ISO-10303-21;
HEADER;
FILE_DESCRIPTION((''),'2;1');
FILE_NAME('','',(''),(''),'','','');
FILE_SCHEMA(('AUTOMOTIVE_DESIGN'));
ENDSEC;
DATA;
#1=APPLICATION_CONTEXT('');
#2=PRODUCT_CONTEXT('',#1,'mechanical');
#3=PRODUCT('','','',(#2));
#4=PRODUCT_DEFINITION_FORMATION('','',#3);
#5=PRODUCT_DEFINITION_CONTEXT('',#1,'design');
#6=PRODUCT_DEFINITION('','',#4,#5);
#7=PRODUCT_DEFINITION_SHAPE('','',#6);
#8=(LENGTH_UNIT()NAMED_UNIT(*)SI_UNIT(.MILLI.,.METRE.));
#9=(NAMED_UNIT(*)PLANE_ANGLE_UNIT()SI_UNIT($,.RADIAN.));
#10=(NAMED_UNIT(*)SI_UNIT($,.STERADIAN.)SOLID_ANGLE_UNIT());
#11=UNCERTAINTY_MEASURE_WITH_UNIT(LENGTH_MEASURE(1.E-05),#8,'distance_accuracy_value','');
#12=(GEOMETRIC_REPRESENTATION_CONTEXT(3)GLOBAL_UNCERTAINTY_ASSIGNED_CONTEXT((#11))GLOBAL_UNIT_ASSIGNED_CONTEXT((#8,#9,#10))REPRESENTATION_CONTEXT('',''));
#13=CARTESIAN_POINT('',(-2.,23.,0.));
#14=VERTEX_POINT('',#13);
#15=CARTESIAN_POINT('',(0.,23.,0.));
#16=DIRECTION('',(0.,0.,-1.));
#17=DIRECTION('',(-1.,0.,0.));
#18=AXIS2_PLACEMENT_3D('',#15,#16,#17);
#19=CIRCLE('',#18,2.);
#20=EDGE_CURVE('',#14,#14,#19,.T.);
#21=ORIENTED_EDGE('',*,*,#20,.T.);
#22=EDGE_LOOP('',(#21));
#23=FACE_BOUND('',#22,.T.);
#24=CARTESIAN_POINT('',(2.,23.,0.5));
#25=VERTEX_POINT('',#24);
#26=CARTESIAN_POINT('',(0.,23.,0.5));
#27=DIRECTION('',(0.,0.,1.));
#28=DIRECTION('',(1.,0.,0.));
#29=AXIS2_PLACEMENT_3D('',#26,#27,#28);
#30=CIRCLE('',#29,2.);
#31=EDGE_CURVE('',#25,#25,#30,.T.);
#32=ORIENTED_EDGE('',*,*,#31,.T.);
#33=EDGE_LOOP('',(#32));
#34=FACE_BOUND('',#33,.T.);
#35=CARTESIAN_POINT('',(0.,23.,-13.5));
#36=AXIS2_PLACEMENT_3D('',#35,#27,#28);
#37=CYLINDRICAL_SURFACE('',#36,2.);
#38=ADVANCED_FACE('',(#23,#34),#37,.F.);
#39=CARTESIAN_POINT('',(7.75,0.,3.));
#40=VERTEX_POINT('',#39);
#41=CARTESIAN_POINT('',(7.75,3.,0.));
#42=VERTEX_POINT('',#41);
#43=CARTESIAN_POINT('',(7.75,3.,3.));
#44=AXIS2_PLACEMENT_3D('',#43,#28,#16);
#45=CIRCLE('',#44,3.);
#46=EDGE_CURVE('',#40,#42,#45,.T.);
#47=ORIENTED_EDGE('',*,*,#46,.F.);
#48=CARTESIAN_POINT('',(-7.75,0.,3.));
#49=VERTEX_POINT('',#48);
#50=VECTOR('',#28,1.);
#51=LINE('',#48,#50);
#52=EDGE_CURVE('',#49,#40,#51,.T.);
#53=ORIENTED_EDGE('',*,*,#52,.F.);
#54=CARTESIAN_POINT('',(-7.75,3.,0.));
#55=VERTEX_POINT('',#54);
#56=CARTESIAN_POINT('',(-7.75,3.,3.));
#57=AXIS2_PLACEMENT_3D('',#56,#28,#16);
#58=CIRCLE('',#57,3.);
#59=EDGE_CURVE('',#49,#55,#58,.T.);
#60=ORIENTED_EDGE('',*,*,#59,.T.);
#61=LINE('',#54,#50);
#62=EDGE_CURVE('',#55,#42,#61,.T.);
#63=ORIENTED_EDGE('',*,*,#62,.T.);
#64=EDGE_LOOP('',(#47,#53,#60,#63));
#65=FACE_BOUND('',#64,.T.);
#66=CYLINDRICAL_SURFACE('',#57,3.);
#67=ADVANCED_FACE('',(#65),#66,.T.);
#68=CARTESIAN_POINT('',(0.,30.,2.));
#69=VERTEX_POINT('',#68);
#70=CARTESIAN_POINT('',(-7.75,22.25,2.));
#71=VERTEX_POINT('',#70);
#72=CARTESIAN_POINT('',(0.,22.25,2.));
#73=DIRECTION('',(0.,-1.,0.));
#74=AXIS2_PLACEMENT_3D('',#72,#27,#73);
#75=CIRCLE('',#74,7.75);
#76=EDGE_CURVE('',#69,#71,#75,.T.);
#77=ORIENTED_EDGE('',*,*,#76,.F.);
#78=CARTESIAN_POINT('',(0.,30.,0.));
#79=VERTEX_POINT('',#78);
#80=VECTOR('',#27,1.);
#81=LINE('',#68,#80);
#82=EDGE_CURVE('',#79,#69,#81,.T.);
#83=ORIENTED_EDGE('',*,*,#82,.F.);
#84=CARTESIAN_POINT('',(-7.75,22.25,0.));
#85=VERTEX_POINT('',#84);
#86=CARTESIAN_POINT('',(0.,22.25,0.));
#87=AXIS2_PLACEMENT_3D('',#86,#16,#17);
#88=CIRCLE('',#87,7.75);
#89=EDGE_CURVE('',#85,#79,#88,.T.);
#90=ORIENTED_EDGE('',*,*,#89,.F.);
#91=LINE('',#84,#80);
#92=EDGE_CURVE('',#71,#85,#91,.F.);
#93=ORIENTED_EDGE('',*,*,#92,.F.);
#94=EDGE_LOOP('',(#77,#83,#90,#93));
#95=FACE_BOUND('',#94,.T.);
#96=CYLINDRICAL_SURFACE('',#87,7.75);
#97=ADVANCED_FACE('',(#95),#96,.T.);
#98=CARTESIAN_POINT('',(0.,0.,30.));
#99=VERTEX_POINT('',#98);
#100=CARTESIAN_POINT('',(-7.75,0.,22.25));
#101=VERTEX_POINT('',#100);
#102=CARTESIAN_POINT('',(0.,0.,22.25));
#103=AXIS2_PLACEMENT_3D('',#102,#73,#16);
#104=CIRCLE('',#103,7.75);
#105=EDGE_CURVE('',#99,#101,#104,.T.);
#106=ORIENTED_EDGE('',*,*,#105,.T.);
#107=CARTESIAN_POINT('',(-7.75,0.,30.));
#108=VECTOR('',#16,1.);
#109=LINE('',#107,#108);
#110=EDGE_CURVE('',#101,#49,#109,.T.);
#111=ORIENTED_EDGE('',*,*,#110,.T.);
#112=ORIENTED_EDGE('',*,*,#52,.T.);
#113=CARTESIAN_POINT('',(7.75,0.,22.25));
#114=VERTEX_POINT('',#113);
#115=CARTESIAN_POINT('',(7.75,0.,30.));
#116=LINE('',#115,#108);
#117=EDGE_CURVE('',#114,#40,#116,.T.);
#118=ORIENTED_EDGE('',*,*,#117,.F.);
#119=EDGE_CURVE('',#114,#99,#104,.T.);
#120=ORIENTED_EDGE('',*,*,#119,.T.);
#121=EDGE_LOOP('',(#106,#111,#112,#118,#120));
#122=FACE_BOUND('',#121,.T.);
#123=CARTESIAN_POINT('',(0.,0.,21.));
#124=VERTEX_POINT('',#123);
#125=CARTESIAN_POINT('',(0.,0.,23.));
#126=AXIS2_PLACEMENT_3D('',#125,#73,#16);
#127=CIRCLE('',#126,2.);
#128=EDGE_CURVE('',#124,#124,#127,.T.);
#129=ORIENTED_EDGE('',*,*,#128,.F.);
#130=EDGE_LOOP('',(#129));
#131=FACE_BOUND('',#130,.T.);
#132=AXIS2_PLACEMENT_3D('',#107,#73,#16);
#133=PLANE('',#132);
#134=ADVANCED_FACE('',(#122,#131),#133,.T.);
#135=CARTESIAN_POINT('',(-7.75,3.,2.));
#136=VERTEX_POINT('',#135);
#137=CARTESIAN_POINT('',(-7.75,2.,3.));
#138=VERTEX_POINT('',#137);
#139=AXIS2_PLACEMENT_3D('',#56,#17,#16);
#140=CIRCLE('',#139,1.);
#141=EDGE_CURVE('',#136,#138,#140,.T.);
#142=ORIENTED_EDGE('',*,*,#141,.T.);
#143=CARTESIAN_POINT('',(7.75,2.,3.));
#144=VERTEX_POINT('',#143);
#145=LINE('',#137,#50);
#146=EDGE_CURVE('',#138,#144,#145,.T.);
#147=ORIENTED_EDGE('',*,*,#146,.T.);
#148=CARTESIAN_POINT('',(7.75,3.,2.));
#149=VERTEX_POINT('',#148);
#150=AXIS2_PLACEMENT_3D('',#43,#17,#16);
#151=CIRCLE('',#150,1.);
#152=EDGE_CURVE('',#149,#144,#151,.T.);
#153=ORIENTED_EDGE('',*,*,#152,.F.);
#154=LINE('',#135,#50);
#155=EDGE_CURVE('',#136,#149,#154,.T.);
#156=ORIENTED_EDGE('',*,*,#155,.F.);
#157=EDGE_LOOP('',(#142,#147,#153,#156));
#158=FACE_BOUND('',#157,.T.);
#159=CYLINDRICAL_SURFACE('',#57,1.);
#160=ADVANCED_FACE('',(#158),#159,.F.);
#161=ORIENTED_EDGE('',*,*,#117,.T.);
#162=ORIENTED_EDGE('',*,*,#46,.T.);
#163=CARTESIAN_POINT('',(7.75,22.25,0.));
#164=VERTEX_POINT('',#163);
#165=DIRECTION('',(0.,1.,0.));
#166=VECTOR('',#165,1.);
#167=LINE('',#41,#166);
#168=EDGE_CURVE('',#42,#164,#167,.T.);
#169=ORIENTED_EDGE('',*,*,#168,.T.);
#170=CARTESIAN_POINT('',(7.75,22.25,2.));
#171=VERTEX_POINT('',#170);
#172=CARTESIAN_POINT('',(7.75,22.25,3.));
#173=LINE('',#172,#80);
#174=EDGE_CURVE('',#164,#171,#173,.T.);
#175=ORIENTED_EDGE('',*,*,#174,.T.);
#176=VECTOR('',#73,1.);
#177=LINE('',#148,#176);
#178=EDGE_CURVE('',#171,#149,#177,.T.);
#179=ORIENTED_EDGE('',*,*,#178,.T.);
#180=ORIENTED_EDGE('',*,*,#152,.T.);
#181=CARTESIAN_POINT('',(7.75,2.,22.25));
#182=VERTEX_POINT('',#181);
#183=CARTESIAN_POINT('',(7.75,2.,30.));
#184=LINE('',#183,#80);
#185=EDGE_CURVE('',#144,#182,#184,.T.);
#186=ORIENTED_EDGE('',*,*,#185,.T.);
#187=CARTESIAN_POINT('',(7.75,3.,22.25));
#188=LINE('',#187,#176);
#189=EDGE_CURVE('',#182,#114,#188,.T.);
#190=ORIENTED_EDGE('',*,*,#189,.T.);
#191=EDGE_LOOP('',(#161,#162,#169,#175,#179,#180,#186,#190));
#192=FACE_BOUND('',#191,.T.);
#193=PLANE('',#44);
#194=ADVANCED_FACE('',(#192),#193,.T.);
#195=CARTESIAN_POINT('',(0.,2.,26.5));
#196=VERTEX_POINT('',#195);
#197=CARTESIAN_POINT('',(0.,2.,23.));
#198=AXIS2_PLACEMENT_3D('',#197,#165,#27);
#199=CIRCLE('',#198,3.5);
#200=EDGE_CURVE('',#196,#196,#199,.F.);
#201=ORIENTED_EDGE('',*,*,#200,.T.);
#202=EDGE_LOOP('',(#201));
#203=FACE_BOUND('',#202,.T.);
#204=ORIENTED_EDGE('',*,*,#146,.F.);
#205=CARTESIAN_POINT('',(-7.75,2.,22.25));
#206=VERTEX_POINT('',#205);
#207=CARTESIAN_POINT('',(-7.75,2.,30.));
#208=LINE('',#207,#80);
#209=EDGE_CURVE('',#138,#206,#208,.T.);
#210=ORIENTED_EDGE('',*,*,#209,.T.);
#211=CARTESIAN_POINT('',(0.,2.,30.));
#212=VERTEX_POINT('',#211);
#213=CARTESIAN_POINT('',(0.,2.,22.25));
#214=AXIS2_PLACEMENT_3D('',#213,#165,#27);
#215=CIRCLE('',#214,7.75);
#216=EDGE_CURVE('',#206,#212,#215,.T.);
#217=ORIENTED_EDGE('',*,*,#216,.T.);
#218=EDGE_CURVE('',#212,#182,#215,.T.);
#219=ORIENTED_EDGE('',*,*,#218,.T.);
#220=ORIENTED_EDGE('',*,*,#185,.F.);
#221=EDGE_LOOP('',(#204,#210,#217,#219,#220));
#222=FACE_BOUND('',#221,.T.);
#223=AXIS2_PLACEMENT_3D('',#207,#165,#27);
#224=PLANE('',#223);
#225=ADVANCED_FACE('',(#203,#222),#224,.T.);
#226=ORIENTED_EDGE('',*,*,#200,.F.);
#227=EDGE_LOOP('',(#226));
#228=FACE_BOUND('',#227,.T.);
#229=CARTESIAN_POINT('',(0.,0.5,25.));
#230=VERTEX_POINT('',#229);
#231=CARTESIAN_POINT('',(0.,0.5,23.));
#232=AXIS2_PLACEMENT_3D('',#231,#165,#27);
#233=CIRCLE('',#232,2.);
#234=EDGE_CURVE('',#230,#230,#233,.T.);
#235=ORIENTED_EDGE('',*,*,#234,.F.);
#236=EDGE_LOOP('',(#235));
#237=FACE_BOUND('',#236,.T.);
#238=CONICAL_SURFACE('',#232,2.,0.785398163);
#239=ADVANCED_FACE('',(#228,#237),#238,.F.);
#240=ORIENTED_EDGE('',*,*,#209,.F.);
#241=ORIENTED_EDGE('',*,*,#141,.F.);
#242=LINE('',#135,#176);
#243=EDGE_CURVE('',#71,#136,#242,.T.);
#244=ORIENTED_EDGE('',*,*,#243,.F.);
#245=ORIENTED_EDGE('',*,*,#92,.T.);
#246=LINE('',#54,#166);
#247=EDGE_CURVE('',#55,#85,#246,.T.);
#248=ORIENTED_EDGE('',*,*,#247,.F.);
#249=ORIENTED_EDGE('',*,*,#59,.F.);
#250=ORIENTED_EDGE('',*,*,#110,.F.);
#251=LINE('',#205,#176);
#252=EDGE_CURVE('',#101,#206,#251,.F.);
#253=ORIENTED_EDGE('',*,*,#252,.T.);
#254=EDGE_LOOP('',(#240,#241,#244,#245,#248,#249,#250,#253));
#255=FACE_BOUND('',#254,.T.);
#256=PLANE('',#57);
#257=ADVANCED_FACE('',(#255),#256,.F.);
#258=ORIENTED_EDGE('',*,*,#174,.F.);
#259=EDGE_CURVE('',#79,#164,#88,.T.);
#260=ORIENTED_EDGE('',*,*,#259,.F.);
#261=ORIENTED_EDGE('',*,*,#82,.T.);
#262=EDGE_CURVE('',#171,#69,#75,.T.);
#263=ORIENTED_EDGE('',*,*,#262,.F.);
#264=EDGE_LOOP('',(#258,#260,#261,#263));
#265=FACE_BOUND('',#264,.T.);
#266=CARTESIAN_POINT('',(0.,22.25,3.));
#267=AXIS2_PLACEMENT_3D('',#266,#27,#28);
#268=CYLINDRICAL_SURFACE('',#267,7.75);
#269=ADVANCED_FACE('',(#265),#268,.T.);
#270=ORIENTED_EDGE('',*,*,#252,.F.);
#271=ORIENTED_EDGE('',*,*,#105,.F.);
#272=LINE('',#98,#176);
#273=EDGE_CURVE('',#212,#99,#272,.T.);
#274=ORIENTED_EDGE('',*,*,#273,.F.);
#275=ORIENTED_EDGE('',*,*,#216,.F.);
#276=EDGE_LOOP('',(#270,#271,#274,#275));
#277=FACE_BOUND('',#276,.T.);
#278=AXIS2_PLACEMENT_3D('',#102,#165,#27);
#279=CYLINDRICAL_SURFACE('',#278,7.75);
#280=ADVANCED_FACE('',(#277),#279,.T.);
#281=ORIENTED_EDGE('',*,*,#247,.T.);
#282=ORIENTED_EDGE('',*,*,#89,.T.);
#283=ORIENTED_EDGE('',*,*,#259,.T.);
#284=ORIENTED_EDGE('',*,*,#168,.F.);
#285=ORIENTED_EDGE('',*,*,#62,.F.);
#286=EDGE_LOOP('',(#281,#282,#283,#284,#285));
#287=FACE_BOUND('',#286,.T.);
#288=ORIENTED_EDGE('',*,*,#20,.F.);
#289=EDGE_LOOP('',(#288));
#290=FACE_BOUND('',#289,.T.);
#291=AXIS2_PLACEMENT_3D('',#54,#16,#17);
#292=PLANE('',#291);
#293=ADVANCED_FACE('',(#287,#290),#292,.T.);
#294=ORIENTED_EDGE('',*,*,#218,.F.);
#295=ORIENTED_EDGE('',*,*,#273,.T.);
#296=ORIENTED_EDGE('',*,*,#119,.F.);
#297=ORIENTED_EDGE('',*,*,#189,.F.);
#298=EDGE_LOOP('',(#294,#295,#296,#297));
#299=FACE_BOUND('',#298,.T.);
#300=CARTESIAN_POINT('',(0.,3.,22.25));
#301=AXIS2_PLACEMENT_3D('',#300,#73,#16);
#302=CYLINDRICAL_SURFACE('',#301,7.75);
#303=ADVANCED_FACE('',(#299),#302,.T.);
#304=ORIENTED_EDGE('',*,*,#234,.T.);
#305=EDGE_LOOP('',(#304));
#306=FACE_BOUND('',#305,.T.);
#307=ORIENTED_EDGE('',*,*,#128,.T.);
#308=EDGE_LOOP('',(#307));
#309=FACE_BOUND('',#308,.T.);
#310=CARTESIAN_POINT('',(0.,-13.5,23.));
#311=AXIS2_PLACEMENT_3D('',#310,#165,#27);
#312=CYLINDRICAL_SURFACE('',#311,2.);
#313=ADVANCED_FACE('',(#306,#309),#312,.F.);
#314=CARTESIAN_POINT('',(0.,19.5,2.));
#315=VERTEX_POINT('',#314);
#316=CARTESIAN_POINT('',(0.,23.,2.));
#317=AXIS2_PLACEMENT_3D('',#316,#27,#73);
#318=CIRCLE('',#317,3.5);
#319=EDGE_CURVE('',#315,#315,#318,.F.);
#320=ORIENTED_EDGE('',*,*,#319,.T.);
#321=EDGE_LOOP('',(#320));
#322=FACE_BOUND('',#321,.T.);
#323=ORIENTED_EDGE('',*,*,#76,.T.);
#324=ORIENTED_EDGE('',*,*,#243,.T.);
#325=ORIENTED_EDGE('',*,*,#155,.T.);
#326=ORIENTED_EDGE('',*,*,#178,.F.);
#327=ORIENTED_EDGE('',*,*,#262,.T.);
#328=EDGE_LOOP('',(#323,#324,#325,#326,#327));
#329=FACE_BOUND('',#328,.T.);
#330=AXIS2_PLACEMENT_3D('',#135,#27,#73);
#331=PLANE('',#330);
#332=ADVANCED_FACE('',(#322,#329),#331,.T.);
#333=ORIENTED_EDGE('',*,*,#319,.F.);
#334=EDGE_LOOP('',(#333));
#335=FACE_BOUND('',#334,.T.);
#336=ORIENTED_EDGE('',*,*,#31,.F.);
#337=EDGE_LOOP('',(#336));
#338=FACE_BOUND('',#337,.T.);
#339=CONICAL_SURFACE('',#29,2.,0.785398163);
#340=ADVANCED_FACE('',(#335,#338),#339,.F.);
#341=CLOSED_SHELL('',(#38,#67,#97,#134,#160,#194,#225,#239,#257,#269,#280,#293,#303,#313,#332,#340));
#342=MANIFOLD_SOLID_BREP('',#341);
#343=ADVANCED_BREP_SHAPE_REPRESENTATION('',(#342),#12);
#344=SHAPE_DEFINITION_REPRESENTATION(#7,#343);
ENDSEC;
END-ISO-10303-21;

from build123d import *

# Parameters (mm, degrees)
EXTRUDE_1_DEPTH      = 7.75
EXTRUDE_1_DEPTH_BACK = 7.75
SKETCH_3_R           = 2
CUT_EXTRUDE_2_DEPTH  = 15.5
SKETCH_4_R           = 2
CUT_EXTRUDE_3_DEPTH  = 15.5
FILLET_1_R           = 7.75
CHAMFER_1_SIZE       = 1.5


with BuildPart() as part:
    # 草图1 → 凸台-拉伸1 (new, two sides: drawn at the far end of the back side and taken through both)
    with BuildSketch(Plane(origin=(0, 0, 0), x_dir=(0, 0, -1), z_dir=(1, 0, 0)).offset(-EXTRUDE_1_DEPTH_BACK)):
        with BuildLine():
            Line((-30, 0), (-3, 0))
            ThreePointArc((-3, 0), (-0.878679656, 0.878679656), (0, 3))
            Line((0, 3), (0, 30))
            Line((0, 30), (-2, 30))
            Line((-2, 30), (-2, 3))
            ThreePointArc((-2, 3), (-2.292893219, 2.292893219), (-3, 2))
            Line((-3, 2), (-30, 2))
            Line((-30, 2), (-30, 0))
        make_face()
    extrude(amount=EXTRUDE_1_DEPTH + EXTRUDE_1_DEPTH_BACK)

    # 草图3 → 切除-拉伸2 (cut)
    with BuildSketch(Plane(origin=(0, 2, 0), x_dir=(1, 0, 0), z_dir=(0, 1, 0))):
        with Locations(Location((0, -23, 0), (0, 0, 270))):
            Circle(SKETCH_3_R)
    extrude(amount=-CUT_EXTRUDE_2_DEPTH, mode=Mode.SUBTRACT)

    # 草图4 → 切除-拉伸3 (cut)
    with BuildSketch(Plane.XY.offset(2)):
        with Locations((0, 23)):
            Circle(SKETCH_4_R)
    extrude(amount=-CUT_EXTRUDE_3_DEPTH, mode=Mode.SUBTRACT)

    # 圆角1
    fillet_1_edges = [part.edges().sort_by_distance(p)[0] for p in [
        (7.75, 30, 1),
        (-7.75, 30, 1),
        (7.75, 1, 30),
        (-7.75, 1, 30),
    ]]
    fillet(fillet_1_edges, radius=FILLET_1_R - 0.0001)  # a hair under: the kernel refuses the full size

    # 倒角1
    chamfer_1_edges = [part.edges().sort_by_distance(p)[0] for p in [
        (0, 2, 21),
        (-2, 23, 2),
    ]]
    chamfer(chamfer_1_edges, length=CHAMFER_1_SIZE)


solid = part.part
